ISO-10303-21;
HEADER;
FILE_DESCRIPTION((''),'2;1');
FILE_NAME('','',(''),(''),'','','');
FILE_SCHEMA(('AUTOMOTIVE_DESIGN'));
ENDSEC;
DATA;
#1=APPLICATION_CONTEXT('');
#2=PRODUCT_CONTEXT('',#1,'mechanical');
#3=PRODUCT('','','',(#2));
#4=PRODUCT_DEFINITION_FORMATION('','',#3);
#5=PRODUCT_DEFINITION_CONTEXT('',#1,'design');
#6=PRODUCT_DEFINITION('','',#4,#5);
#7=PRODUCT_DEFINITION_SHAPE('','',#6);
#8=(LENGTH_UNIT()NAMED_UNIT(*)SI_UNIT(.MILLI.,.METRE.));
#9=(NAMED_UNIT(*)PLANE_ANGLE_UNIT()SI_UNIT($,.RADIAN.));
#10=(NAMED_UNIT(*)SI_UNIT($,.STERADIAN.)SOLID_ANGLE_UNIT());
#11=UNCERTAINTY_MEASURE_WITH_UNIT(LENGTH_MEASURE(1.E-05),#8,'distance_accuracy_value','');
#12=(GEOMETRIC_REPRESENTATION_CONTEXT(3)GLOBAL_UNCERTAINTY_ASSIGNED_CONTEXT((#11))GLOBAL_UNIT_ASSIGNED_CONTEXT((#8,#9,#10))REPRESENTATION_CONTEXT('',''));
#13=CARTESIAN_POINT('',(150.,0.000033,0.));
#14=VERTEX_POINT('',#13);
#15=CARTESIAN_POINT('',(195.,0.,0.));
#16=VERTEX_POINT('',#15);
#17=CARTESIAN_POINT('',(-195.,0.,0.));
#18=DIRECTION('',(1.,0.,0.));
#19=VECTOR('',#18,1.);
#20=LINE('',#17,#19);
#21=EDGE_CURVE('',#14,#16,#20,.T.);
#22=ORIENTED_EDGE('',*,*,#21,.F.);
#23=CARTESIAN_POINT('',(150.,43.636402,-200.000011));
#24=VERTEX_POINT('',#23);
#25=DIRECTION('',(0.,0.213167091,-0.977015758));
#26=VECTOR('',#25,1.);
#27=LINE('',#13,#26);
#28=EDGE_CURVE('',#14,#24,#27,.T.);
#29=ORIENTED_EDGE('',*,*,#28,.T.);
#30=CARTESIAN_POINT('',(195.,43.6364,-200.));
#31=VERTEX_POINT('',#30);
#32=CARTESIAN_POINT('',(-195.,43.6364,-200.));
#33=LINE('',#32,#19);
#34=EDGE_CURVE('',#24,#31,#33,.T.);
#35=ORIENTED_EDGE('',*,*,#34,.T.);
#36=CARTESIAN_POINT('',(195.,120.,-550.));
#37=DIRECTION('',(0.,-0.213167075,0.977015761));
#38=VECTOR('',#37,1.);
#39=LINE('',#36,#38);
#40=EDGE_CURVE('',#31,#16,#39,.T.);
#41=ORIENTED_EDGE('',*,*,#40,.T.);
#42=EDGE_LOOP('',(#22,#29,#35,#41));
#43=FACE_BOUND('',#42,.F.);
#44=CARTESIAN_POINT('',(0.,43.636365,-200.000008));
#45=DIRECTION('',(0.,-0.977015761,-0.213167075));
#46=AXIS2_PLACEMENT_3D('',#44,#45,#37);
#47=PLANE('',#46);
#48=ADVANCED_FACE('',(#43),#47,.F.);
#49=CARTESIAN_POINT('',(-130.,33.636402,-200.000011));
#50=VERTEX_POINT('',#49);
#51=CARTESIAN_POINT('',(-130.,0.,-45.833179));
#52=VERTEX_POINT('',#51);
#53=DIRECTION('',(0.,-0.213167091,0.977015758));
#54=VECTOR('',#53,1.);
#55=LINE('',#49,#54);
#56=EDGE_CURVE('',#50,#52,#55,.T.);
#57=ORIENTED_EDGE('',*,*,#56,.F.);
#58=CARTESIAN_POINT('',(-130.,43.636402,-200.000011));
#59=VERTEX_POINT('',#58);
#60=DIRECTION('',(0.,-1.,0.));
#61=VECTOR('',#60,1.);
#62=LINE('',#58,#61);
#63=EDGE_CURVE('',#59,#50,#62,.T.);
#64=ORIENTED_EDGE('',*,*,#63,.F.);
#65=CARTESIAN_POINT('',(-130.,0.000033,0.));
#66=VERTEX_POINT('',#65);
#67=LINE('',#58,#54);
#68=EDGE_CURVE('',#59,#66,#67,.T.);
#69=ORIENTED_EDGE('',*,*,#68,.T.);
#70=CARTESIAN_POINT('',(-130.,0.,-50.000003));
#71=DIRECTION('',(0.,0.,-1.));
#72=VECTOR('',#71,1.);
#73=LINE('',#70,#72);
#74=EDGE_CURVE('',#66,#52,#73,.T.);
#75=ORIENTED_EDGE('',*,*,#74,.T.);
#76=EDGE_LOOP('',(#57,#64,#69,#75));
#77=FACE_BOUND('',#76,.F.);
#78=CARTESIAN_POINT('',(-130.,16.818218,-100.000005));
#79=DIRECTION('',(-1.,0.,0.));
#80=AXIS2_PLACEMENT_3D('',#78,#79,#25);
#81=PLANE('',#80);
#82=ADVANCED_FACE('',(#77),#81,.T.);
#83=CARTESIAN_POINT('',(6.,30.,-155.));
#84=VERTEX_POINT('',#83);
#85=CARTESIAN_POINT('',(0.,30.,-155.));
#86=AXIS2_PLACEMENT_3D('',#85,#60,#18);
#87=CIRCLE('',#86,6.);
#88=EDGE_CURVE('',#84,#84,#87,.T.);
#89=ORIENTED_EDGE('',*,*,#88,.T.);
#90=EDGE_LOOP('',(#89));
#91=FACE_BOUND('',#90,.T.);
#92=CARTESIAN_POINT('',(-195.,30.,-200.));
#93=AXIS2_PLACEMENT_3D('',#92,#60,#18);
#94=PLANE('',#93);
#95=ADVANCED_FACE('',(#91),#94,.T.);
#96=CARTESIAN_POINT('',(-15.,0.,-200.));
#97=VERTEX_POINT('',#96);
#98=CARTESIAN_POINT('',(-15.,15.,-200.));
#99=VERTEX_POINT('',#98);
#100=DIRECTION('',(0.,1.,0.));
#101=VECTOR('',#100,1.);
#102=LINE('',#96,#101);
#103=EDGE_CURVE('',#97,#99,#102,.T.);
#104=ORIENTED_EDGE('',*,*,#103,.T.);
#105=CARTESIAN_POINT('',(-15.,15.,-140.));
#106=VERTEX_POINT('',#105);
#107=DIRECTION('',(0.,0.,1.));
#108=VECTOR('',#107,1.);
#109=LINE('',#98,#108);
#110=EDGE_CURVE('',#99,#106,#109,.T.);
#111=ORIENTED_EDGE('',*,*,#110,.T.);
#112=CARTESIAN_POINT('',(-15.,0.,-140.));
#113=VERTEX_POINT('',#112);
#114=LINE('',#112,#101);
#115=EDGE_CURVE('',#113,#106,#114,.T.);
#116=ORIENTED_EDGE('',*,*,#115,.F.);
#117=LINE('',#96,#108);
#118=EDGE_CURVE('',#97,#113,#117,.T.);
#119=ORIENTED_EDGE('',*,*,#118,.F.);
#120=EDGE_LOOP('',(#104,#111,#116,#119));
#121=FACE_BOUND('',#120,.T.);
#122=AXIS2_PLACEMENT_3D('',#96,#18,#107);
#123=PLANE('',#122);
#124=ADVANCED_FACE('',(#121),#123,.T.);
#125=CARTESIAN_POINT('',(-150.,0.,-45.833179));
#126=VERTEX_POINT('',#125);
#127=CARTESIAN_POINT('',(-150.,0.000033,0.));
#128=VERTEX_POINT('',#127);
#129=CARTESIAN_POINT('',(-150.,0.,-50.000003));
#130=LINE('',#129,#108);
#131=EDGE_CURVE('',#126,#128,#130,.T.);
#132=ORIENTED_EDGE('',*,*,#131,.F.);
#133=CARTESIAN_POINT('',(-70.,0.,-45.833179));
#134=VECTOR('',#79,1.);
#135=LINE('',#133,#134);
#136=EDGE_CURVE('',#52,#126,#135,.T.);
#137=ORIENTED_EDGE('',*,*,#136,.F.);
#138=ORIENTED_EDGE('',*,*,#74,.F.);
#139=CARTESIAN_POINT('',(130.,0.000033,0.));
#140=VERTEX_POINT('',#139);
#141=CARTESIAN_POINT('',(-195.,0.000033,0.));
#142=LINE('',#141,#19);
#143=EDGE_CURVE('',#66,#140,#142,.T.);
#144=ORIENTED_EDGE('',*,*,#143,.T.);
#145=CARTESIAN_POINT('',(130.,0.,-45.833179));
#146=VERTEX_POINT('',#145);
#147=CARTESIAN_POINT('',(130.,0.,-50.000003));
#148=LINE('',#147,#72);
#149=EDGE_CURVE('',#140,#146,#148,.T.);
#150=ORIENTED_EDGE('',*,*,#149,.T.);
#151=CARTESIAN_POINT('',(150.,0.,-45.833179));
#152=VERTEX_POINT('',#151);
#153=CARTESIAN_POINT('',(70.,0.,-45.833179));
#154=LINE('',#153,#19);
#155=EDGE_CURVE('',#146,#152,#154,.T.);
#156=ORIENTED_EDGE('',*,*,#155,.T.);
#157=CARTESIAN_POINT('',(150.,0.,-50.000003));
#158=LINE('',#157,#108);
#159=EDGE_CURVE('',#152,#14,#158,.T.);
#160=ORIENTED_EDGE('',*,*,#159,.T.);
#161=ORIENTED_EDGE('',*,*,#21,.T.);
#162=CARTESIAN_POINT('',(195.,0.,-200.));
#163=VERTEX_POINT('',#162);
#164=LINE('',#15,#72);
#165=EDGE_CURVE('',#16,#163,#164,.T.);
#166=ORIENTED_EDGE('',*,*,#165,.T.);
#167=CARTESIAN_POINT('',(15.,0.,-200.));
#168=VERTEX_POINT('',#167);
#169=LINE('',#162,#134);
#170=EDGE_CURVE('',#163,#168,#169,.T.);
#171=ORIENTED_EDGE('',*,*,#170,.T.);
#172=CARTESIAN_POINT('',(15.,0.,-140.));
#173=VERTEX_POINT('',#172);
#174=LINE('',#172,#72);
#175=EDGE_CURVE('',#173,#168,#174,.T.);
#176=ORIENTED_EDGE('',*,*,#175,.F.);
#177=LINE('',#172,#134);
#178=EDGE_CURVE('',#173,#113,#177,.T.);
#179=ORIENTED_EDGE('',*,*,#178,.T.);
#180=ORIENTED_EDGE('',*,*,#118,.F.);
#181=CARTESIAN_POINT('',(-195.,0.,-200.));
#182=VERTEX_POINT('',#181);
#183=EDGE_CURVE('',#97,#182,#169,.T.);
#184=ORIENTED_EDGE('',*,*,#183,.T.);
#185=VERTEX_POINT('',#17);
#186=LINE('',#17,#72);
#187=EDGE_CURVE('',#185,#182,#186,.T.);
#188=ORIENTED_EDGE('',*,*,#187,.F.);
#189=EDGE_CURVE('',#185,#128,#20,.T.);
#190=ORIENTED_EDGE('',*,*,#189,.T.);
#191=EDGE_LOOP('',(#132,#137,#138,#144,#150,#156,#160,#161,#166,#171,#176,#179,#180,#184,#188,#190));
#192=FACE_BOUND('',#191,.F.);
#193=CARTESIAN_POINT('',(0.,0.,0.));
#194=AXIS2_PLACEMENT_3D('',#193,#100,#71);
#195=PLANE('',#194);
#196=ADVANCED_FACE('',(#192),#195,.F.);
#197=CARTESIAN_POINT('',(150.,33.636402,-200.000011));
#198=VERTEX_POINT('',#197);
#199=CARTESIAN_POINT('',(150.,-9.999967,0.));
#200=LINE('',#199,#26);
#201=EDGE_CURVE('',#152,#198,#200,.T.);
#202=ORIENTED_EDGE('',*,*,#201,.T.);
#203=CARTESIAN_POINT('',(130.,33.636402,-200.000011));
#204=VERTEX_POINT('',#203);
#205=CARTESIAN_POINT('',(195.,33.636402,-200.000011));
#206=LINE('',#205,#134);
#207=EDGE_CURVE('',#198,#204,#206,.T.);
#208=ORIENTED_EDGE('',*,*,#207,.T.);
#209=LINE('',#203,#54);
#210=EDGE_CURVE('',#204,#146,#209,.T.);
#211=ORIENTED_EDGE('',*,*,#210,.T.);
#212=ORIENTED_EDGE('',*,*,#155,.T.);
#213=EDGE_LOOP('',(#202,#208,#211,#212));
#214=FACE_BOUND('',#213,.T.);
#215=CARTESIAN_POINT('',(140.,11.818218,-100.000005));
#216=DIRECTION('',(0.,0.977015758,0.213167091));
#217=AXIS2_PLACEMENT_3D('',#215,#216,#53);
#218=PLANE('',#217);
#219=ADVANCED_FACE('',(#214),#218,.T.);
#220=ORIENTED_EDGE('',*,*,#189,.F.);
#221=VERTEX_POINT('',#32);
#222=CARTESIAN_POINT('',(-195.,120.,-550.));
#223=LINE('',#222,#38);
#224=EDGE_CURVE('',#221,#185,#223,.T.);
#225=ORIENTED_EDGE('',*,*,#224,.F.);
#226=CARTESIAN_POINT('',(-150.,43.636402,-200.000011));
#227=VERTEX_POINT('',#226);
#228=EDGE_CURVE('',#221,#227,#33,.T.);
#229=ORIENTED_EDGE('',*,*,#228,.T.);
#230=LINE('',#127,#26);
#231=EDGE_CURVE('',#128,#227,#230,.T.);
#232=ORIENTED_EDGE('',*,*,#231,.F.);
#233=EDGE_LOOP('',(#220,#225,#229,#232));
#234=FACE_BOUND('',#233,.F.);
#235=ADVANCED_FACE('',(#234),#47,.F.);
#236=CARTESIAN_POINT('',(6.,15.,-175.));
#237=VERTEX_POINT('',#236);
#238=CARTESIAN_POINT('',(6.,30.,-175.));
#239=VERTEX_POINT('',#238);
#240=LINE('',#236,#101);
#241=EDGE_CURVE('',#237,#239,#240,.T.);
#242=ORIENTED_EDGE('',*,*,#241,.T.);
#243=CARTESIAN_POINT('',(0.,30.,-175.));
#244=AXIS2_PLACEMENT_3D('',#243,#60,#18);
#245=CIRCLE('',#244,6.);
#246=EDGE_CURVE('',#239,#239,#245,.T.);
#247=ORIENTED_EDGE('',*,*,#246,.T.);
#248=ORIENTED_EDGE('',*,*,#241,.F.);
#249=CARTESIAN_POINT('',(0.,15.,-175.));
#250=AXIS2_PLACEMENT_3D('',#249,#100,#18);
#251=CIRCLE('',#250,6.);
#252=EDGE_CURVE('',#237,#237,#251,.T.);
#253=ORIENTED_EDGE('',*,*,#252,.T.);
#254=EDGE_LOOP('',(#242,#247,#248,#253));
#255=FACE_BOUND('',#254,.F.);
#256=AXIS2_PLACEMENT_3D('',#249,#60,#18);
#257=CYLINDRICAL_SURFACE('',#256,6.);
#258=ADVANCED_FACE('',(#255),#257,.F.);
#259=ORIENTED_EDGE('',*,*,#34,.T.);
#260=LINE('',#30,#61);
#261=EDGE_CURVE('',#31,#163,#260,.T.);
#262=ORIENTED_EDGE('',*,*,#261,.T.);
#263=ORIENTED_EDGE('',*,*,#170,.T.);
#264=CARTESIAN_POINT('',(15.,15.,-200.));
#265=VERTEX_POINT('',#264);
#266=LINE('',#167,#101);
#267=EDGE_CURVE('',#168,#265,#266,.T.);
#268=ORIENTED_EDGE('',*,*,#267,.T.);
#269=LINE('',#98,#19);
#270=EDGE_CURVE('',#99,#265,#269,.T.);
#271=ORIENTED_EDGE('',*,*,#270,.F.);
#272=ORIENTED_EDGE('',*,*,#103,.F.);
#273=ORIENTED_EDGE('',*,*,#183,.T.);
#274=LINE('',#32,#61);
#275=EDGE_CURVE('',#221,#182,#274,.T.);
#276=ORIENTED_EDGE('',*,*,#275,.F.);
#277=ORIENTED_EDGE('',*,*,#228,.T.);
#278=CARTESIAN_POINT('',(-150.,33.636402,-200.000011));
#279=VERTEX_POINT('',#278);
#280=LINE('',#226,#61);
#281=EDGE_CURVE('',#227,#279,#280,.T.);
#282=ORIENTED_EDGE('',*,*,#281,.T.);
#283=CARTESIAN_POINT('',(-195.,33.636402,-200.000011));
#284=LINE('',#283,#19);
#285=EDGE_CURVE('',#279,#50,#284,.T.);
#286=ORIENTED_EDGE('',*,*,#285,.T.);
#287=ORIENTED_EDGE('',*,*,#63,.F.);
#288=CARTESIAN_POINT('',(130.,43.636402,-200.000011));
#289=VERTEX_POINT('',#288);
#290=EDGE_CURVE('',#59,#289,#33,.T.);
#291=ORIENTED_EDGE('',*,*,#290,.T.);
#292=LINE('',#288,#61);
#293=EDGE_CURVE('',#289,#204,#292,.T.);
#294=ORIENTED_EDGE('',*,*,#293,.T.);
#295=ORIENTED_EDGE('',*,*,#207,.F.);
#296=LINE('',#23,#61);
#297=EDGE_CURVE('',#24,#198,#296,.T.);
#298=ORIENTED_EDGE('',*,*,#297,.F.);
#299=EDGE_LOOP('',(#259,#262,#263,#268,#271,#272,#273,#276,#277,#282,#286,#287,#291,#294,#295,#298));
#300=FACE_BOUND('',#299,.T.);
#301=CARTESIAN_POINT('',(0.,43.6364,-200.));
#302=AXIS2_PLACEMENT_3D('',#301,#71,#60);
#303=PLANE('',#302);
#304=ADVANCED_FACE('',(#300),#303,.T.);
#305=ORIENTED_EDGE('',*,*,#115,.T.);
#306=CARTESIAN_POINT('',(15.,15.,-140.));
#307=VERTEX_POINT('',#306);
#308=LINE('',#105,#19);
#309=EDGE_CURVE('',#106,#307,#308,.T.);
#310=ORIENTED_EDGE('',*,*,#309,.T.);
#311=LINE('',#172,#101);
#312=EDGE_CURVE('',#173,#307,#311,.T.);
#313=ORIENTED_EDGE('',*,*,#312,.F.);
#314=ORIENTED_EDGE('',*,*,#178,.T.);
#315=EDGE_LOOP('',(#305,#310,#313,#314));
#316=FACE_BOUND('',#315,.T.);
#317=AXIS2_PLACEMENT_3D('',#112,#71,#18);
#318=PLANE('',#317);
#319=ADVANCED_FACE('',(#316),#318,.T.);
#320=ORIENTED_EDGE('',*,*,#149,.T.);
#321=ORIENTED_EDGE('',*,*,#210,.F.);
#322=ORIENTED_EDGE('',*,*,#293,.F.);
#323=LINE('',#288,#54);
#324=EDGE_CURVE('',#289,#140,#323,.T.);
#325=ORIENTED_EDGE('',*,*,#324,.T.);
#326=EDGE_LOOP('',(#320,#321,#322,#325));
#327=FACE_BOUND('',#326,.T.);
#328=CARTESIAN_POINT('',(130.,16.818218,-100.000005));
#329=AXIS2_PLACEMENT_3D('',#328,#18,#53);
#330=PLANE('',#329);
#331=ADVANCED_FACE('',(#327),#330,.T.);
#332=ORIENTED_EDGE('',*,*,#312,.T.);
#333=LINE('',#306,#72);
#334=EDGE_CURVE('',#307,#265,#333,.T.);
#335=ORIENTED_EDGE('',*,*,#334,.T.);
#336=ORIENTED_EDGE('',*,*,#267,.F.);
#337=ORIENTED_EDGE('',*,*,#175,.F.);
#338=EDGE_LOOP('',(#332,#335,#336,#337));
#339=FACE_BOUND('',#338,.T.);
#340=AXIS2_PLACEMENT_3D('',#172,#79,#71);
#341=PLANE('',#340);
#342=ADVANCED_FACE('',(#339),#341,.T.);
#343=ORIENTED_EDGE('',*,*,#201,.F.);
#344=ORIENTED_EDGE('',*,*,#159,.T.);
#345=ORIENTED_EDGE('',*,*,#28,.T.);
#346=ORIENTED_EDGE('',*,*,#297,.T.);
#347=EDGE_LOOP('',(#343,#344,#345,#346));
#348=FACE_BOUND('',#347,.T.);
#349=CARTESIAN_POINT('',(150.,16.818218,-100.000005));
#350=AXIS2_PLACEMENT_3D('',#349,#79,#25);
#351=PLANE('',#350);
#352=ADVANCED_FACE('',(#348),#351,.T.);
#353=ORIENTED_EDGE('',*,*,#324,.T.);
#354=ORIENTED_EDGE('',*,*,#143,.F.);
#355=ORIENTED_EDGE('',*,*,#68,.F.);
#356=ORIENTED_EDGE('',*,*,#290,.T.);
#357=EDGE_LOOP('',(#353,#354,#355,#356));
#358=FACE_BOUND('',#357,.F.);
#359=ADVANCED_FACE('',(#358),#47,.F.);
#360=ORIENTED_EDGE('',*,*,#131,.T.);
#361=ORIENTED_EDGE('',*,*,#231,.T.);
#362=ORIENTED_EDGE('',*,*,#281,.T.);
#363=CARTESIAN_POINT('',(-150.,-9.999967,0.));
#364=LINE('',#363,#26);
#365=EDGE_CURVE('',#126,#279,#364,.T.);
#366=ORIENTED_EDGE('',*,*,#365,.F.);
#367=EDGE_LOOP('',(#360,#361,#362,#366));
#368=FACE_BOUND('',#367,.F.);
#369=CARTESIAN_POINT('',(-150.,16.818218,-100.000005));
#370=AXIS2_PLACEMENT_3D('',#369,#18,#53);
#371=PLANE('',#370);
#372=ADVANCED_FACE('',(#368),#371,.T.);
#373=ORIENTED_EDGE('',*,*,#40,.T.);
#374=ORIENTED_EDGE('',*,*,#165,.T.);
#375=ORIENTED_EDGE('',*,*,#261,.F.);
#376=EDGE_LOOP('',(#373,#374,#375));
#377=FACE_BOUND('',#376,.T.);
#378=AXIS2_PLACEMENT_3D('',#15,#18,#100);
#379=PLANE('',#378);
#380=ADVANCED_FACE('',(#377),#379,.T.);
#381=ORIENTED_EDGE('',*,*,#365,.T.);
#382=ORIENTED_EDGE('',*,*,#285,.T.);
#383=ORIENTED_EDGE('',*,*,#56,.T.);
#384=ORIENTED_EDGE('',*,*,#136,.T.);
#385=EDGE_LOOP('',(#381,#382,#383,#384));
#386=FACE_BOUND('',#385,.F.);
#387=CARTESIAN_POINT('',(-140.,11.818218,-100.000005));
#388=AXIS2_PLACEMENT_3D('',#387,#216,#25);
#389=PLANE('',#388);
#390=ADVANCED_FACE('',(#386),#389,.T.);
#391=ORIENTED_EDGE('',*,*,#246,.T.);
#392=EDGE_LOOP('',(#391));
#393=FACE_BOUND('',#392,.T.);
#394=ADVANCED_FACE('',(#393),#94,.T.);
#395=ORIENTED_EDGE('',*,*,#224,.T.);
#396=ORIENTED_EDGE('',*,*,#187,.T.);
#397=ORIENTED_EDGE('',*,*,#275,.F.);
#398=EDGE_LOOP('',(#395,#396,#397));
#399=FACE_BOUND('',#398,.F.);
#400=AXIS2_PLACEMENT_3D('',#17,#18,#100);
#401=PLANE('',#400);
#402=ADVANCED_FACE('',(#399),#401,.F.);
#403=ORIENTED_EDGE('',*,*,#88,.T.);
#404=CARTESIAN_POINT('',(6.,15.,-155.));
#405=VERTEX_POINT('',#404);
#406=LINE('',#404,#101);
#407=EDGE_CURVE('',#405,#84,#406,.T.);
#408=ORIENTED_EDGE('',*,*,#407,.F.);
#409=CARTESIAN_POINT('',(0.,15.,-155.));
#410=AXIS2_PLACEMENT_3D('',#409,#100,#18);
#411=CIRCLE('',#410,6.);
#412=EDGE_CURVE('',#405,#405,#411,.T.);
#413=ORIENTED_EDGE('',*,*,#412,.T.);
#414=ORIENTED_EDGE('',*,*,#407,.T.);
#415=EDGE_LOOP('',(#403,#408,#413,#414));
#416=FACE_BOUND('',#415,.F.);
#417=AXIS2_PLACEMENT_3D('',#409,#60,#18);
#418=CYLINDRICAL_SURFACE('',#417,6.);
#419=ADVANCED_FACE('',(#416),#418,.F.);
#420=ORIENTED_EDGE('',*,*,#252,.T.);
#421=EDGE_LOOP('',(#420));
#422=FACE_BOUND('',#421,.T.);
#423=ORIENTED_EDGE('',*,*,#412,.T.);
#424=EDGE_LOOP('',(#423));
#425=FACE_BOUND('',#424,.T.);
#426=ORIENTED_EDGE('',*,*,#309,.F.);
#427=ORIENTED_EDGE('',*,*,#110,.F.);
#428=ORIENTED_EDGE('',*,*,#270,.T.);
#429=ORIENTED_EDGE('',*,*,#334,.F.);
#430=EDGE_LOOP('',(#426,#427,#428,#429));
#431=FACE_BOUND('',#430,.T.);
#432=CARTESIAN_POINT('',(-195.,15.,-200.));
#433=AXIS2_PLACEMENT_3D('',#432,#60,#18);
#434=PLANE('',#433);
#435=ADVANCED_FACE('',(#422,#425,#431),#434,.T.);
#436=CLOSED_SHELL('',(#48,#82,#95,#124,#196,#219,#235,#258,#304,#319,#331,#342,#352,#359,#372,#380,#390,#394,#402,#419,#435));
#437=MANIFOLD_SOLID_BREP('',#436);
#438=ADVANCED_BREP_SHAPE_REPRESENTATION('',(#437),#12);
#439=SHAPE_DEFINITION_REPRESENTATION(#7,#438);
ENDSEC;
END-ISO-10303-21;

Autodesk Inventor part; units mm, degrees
ref_plane "YZ Plane" through (0, 0, 0) normal (1, 0, 0) x (0, 1, 0)
ref_plane "XZ Plane" through (0, 0, 0) normal (0, 1, 0) x (-1, 0, 0)
ref_plane "XY Plane" through (0, 0, 0) normal (0, 0, 1) x (1, 0, 0)
sketch "草图2" plane through (0, 0, 0) normal (1, 0, 0) x (0, 1, 0)
  line L0 (120, -550) -> (0, 0)
  line L1 (0, 0) -> (0, -550)
  line L2 (0, -550) -> (120, -550)
  line L3 (43.6364, -200) -> (0, -200)
  dimension "d0" = 120
  dimension "d1" = 550
  dimension "d2" = 200
extrude "拉伸1" add sketch "草图2" along normal mid plane 390 contours L3 L1 L0
sketch "草图3" plane through (-195, 0, 0) normal (0, 0.9770158, 0.2131671) x (1, 0, 0)
  line L0 (0, 0) -> (390, 0) projected
  line L1 (390, 204.705) -> (0, 204.705) projected
  line L2 (325, 0) -> (345, 0)
  line L3 (345, 0) -> (345, 204.705)
  line L4 (345, 204.705) -> (325, 204.705)
  line L5 (325, 204.705) -> (325, 0)
  line L6 (390, 204.705) -> (390, 0) projected
  point P0 (195, 0)
  dimension "d5" = 20
  dimension "d6" = 45
sketch "草图4" plane through (195, 43.6364, -200) normal (0, 0, -1) x (-1, 0, 0)
  line L0 (45, 0) -> (45, -10)
  point P0 (195, -43.6364)
  dimension "d8" = 10
sweep "扫掠1" cut profiles "草图3" path "草图4" contours L5 L1 L3 L0
mirror "镜像1" about plane through (0, 0, 0) normal (1, 0, 0) of "扫掠1"
sketch "草图5" plane through (-195, 0, -200) normal (0, -1, 0) x (1, 0, 0)
  line L0 (195, -50) -> (195, 300) projected
  line L1 (0, 0) -> (390, 0) projected
  line L2 (210, 0) -> (180, 0)
  line L3 (180, 0) -> (180, 60)
  line L4 (180, 60) -> (210, 60)
  line L5 (210, 60) -> (210, 0)
  point P0 (195, 200)
  point P1 (180, 0)
  dimension "d11" = 60
  dimension "d12" = 30
extrude "拉伸2" cut sketch "草图5" against normal blind 15
sketch "草图6" plane through (-195, 15, -200) normal (0, -1, 0) x (1, 0, 0)
  line L0 (210, 0) -> (180, 0) projected
  line L1 (180, 60) -> (210, 60) projected
  line L2 (180, 0) -> (180, 60) projected
  line L3 (210, 0) -> (180, 0) projected
  line L4 (210, 60) -> (210, 0) projected
  line L5 (195, -11.4626) -> (195, 50.2539)
  circle A0 centre (195, 25) radius 6
  circle A1 centre (195, 45) radius 6
  point P0 (195, 200)
  dimension "d15" = 30
  dimension "d16" = 12
  dimension "d17" = 12
  dimension "d18" = 20
  dimension "d19" = 25
extrude "拉伸3" cut sketch "草图6" against normal blind 15 contours A0 L5 | L5 A0 | A1
thread "螺纹1"
thread "螺纹2"
properties part number "猫砂盆底座"
